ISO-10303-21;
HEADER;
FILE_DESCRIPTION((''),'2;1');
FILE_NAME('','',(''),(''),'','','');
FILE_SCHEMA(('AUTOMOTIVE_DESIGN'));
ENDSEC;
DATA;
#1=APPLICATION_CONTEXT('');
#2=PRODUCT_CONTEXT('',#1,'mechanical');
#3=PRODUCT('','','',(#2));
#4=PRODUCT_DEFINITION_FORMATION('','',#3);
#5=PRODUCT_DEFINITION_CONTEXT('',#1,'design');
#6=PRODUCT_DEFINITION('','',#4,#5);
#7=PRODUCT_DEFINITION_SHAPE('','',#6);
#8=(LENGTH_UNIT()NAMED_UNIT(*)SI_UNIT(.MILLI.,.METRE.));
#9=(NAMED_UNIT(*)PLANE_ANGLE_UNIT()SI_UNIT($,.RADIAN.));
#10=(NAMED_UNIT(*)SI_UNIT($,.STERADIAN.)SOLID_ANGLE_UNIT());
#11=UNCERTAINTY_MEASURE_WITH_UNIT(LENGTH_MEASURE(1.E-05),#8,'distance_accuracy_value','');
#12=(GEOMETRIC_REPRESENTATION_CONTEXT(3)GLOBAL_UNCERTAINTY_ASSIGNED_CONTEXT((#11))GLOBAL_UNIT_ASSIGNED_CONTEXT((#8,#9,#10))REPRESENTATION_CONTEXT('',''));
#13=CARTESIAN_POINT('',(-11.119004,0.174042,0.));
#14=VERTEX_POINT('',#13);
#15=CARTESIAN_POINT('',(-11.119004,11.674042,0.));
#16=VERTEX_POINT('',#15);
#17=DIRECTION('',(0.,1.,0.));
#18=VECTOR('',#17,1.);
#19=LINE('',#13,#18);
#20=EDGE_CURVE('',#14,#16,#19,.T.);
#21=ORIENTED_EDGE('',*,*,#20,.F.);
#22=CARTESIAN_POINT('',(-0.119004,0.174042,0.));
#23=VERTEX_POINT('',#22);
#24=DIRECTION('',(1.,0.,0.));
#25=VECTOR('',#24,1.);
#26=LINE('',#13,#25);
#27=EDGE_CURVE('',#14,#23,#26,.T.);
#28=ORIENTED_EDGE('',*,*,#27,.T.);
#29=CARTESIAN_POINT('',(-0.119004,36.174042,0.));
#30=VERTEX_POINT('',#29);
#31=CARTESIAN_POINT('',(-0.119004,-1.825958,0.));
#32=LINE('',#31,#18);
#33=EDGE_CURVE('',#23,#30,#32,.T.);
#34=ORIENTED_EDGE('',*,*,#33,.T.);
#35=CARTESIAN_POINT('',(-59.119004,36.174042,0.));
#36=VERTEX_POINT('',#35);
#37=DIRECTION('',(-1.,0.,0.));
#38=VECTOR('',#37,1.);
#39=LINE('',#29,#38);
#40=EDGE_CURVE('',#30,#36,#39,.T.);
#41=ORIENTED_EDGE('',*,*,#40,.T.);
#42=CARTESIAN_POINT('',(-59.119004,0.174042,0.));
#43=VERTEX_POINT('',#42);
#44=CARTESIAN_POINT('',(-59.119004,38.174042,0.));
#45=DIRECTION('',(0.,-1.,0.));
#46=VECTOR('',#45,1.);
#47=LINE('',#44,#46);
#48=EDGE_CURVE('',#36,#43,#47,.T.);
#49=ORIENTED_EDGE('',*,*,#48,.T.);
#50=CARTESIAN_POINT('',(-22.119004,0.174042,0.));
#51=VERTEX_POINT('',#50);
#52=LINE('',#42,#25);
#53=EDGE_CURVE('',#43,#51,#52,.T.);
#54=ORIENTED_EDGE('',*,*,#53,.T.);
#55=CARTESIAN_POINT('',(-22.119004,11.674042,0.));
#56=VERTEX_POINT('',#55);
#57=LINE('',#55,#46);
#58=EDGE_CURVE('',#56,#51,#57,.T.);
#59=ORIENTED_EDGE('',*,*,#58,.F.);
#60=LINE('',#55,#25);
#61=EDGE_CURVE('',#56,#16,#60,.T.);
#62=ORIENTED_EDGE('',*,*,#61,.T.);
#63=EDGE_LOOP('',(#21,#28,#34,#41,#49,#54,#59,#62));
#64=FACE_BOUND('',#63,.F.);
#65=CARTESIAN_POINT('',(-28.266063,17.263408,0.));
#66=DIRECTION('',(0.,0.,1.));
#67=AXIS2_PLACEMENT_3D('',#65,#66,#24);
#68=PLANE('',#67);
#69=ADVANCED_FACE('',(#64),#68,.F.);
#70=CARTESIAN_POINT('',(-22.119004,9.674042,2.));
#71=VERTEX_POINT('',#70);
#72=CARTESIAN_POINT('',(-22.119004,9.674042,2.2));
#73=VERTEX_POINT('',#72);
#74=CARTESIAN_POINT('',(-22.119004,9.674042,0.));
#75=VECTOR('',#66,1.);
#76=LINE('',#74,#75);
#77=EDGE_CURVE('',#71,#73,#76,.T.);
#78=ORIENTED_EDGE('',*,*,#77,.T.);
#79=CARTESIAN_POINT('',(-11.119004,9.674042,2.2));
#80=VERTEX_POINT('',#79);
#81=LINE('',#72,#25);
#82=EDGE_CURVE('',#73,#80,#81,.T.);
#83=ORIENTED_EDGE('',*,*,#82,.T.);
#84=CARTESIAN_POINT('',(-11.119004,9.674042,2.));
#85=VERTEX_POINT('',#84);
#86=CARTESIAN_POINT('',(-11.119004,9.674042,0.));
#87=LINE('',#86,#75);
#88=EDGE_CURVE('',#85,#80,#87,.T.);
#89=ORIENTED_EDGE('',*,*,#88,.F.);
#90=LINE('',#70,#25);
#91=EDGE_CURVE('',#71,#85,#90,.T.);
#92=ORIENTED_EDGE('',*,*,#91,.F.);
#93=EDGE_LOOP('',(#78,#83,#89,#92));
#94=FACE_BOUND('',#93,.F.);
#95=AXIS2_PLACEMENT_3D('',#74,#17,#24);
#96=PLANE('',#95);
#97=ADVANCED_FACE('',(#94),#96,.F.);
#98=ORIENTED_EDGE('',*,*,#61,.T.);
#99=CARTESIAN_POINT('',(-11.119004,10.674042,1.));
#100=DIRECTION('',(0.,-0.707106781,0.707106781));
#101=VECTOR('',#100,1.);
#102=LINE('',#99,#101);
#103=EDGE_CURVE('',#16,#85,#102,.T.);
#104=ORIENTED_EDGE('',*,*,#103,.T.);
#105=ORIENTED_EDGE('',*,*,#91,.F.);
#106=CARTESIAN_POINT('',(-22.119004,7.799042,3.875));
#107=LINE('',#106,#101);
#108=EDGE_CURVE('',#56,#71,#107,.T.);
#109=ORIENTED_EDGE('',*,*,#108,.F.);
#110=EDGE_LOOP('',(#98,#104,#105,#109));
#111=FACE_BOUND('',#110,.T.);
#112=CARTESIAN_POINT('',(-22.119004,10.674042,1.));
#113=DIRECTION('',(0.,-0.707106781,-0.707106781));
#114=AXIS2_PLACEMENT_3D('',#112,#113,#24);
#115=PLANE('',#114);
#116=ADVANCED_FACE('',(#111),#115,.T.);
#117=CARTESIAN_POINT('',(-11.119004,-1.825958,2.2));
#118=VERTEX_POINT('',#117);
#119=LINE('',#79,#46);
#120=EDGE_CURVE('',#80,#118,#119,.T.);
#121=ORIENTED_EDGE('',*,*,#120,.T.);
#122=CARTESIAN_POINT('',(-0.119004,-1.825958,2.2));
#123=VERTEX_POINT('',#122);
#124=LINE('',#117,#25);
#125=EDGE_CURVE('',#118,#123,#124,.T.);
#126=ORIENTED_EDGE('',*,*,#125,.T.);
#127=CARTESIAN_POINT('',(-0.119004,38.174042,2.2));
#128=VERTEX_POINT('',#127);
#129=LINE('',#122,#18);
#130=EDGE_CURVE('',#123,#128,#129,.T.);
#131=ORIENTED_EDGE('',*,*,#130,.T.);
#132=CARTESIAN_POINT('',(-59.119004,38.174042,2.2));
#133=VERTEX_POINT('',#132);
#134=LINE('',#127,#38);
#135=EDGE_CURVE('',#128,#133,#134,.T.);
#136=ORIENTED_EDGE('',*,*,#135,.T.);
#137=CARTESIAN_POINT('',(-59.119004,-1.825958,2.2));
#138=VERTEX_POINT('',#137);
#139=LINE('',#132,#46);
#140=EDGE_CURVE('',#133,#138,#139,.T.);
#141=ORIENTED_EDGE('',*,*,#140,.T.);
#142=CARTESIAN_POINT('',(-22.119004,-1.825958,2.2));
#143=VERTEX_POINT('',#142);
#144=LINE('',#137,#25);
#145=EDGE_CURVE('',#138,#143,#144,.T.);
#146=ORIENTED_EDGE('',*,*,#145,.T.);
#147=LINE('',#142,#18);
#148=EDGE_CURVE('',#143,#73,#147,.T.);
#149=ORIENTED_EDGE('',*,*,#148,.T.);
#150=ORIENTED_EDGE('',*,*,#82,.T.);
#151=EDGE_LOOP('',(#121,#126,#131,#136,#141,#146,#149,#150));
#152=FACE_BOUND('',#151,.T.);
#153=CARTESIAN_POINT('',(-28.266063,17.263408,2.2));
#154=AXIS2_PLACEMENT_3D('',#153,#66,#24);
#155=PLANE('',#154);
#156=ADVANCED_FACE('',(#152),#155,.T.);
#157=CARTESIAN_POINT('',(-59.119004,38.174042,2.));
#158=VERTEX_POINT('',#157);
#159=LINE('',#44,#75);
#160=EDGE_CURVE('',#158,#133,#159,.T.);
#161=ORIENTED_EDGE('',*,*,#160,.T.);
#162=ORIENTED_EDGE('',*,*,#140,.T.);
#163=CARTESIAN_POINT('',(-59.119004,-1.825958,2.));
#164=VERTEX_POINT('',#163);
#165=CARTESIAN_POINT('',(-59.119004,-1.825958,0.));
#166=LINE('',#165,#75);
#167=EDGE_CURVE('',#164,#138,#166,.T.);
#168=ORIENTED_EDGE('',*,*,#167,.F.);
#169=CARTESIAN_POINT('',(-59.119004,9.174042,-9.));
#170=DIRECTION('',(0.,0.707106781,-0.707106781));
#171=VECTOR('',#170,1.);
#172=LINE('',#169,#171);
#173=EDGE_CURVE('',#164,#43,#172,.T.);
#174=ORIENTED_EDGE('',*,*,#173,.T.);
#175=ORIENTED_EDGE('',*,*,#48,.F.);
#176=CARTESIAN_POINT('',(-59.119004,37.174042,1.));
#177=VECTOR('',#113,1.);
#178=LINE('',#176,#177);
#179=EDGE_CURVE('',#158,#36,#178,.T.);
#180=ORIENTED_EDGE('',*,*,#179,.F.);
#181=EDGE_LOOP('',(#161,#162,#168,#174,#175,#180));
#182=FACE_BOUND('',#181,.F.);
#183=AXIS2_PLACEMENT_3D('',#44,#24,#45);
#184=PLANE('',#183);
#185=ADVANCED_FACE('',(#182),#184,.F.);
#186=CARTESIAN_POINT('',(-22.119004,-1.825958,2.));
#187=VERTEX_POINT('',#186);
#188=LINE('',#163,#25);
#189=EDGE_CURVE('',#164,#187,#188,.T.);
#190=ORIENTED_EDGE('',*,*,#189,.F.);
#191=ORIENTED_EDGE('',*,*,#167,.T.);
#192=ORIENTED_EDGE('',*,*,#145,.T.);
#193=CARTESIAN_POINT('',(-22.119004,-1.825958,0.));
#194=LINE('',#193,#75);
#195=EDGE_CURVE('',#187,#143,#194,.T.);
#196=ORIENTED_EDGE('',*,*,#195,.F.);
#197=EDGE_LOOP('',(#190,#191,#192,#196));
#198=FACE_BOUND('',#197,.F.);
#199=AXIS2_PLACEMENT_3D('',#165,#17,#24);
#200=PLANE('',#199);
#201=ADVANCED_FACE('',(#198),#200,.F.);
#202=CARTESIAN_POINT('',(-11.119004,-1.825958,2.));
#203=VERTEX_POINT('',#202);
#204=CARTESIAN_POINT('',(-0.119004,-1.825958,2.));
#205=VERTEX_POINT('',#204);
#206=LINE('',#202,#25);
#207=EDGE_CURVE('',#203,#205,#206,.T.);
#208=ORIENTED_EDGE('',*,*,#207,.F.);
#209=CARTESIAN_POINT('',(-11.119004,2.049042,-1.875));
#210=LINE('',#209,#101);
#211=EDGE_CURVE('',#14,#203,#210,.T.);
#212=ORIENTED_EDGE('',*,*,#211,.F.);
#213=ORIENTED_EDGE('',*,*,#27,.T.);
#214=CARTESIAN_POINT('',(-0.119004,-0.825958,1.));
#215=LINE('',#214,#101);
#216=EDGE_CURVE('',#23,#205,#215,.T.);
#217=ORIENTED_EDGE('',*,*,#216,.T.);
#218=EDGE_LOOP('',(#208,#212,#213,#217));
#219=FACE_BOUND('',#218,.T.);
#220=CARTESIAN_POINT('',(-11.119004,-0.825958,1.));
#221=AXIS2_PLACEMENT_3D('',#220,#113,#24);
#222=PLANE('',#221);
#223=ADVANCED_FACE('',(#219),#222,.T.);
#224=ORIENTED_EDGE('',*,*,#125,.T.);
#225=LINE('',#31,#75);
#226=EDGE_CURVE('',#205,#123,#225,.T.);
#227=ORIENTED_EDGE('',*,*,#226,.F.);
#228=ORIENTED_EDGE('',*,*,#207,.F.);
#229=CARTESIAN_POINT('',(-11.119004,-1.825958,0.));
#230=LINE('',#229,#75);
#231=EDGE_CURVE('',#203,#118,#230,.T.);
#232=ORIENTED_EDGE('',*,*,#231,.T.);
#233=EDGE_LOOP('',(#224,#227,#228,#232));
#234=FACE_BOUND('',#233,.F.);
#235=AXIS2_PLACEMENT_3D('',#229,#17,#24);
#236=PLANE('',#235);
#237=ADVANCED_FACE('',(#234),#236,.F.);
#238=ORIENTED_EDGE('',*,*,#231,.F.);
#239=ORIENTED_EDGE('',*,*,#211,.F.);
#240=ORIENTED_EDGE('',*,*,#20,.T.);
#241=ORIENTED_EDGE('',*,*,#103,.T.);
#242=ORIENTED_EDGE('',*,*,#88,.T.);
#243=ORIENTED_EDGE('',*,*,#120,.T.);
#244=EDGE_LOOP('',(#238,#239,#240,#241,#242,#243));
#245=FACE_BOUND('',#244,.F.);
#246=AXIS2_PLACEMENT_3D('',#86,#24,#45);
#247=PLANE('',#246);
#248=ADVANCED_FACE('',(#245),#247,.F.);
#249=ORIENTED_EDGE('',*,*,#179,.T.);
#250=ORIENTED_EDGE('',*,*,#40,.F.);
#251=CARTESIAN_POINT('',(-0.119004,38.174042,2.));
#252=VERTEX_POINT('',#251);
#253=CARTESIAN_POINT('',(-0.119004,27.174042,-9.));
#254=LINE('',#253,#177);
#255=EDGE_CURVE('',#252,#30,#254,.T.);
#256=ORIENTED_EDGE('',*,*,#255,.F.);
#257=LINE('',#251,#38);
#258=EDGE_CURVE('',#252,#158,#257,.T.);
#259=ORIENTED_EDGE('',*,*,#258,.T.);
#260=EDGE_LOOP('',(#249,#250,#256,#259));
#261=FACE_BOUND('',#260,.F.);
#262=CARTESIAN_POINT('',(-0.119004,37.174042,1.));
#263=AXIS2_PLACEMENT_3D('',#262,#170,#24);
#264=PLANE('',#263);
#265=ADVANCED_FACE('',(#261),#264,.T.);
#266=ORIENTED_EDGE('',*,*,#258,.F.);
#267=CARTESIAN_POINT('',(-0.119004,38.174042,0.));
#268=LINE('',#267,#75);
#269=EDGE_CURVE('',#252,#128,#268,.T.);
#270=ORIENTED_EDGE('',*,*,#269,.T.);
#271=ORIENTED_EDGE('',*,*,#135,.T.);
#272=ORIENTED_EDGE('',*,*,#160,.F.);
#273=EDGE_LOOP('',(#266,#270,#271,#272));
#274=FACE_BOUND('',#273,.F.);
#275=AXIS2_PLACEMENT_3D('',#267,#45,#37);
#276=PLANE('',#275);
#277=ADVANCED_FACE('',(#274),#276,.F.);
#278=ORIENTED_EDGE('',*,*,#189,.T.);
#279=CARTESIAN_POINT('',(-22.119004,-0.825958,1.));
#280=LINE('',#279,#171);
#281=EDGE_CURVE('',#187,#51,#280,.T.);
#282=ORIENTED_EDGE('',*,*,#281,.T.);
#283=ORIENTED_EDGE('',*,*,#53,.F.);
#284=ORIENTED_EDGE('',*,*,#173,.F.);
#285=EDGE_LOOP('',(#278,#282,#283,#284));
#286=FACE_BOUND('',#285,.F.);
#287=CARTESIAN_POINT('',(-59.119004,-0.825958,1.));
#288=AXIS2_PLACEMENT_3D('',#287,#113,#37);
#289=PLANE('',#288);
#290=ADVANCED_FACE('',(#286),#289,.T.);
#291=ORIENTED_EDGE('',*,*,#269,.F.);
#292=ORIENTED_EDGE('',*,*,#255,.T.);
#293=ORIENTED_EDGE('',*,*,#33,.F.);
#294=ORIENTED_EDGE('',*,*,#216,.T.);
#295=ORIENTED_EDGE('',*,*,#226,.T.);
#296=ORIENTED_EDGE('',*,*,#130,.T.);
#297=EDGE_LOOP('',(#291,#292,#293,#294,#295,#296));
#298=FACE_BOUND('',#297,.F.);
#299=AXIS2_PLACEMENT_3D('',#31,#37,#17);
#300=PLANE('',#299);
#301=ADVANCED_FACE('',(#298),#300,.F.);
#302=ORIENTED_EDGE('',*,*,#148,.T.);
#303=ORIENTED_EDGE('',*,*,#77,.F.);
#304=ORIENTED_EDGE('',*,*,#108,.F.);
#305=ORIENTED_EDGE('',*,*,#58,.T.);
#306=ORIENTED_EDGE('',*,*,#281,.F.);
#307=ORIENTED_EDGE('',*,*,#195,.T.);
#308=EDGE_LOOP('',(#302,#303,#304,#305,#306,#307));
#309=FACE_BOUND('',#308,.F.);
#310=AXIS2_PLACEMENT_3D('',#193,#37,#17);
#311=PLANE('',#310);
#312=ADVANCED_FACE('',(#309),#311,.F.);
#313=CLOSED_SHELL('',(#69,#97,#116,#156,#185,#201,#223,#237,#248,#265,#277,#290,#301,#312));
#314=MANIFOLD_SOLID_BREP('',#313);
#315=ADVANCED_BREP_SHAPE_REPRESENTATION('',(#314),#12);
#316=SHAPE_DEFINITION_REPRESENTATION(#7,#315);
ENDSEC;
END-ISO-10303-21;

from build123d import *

# Parameters (mm, degrees)
F1_DEPTH = 2.2
F2_SIZE  = 2
F3_SIZE  = 2


with BuildPart() as f1:
    # F0 (on Top) → F1 (new body)
    with BuildSketch(Plane.XY):
        Polygon((-0.1190041415, 38.1740419386), (-59.1190041415, 38.1740419386), (-59.1190041415, -1.8259580614), (-22.1190041415, -1.8259580614), (-22.1190041415, 9.6740419386), (-11.1190041415, 9.6740419386), (-11.1190041415, -1.8259580614), (-0.1190041415, -1.8259580614), align=None)
    extrude(amount=F1_DEPTH)

    # F2
    f2_edges = [f1.edges().sort_by_distance(p)[0] for p in [
        (-29.619004, 38.174042, 0),
        (-40.619004, -1.825958, 0),
    ]]
    chamfer(f2_edges, length=F2_SIZE)

    # F3
    f3_edges = [f1.edges().sort_by_distance(p)[0] for p in [
        (-16.619004, 9.674042, 0),
        (-5.619004, -1.825958, 0),
    ]]
    chamfer(f3_edges, length=F3_SIZE)


solid = f1.part
